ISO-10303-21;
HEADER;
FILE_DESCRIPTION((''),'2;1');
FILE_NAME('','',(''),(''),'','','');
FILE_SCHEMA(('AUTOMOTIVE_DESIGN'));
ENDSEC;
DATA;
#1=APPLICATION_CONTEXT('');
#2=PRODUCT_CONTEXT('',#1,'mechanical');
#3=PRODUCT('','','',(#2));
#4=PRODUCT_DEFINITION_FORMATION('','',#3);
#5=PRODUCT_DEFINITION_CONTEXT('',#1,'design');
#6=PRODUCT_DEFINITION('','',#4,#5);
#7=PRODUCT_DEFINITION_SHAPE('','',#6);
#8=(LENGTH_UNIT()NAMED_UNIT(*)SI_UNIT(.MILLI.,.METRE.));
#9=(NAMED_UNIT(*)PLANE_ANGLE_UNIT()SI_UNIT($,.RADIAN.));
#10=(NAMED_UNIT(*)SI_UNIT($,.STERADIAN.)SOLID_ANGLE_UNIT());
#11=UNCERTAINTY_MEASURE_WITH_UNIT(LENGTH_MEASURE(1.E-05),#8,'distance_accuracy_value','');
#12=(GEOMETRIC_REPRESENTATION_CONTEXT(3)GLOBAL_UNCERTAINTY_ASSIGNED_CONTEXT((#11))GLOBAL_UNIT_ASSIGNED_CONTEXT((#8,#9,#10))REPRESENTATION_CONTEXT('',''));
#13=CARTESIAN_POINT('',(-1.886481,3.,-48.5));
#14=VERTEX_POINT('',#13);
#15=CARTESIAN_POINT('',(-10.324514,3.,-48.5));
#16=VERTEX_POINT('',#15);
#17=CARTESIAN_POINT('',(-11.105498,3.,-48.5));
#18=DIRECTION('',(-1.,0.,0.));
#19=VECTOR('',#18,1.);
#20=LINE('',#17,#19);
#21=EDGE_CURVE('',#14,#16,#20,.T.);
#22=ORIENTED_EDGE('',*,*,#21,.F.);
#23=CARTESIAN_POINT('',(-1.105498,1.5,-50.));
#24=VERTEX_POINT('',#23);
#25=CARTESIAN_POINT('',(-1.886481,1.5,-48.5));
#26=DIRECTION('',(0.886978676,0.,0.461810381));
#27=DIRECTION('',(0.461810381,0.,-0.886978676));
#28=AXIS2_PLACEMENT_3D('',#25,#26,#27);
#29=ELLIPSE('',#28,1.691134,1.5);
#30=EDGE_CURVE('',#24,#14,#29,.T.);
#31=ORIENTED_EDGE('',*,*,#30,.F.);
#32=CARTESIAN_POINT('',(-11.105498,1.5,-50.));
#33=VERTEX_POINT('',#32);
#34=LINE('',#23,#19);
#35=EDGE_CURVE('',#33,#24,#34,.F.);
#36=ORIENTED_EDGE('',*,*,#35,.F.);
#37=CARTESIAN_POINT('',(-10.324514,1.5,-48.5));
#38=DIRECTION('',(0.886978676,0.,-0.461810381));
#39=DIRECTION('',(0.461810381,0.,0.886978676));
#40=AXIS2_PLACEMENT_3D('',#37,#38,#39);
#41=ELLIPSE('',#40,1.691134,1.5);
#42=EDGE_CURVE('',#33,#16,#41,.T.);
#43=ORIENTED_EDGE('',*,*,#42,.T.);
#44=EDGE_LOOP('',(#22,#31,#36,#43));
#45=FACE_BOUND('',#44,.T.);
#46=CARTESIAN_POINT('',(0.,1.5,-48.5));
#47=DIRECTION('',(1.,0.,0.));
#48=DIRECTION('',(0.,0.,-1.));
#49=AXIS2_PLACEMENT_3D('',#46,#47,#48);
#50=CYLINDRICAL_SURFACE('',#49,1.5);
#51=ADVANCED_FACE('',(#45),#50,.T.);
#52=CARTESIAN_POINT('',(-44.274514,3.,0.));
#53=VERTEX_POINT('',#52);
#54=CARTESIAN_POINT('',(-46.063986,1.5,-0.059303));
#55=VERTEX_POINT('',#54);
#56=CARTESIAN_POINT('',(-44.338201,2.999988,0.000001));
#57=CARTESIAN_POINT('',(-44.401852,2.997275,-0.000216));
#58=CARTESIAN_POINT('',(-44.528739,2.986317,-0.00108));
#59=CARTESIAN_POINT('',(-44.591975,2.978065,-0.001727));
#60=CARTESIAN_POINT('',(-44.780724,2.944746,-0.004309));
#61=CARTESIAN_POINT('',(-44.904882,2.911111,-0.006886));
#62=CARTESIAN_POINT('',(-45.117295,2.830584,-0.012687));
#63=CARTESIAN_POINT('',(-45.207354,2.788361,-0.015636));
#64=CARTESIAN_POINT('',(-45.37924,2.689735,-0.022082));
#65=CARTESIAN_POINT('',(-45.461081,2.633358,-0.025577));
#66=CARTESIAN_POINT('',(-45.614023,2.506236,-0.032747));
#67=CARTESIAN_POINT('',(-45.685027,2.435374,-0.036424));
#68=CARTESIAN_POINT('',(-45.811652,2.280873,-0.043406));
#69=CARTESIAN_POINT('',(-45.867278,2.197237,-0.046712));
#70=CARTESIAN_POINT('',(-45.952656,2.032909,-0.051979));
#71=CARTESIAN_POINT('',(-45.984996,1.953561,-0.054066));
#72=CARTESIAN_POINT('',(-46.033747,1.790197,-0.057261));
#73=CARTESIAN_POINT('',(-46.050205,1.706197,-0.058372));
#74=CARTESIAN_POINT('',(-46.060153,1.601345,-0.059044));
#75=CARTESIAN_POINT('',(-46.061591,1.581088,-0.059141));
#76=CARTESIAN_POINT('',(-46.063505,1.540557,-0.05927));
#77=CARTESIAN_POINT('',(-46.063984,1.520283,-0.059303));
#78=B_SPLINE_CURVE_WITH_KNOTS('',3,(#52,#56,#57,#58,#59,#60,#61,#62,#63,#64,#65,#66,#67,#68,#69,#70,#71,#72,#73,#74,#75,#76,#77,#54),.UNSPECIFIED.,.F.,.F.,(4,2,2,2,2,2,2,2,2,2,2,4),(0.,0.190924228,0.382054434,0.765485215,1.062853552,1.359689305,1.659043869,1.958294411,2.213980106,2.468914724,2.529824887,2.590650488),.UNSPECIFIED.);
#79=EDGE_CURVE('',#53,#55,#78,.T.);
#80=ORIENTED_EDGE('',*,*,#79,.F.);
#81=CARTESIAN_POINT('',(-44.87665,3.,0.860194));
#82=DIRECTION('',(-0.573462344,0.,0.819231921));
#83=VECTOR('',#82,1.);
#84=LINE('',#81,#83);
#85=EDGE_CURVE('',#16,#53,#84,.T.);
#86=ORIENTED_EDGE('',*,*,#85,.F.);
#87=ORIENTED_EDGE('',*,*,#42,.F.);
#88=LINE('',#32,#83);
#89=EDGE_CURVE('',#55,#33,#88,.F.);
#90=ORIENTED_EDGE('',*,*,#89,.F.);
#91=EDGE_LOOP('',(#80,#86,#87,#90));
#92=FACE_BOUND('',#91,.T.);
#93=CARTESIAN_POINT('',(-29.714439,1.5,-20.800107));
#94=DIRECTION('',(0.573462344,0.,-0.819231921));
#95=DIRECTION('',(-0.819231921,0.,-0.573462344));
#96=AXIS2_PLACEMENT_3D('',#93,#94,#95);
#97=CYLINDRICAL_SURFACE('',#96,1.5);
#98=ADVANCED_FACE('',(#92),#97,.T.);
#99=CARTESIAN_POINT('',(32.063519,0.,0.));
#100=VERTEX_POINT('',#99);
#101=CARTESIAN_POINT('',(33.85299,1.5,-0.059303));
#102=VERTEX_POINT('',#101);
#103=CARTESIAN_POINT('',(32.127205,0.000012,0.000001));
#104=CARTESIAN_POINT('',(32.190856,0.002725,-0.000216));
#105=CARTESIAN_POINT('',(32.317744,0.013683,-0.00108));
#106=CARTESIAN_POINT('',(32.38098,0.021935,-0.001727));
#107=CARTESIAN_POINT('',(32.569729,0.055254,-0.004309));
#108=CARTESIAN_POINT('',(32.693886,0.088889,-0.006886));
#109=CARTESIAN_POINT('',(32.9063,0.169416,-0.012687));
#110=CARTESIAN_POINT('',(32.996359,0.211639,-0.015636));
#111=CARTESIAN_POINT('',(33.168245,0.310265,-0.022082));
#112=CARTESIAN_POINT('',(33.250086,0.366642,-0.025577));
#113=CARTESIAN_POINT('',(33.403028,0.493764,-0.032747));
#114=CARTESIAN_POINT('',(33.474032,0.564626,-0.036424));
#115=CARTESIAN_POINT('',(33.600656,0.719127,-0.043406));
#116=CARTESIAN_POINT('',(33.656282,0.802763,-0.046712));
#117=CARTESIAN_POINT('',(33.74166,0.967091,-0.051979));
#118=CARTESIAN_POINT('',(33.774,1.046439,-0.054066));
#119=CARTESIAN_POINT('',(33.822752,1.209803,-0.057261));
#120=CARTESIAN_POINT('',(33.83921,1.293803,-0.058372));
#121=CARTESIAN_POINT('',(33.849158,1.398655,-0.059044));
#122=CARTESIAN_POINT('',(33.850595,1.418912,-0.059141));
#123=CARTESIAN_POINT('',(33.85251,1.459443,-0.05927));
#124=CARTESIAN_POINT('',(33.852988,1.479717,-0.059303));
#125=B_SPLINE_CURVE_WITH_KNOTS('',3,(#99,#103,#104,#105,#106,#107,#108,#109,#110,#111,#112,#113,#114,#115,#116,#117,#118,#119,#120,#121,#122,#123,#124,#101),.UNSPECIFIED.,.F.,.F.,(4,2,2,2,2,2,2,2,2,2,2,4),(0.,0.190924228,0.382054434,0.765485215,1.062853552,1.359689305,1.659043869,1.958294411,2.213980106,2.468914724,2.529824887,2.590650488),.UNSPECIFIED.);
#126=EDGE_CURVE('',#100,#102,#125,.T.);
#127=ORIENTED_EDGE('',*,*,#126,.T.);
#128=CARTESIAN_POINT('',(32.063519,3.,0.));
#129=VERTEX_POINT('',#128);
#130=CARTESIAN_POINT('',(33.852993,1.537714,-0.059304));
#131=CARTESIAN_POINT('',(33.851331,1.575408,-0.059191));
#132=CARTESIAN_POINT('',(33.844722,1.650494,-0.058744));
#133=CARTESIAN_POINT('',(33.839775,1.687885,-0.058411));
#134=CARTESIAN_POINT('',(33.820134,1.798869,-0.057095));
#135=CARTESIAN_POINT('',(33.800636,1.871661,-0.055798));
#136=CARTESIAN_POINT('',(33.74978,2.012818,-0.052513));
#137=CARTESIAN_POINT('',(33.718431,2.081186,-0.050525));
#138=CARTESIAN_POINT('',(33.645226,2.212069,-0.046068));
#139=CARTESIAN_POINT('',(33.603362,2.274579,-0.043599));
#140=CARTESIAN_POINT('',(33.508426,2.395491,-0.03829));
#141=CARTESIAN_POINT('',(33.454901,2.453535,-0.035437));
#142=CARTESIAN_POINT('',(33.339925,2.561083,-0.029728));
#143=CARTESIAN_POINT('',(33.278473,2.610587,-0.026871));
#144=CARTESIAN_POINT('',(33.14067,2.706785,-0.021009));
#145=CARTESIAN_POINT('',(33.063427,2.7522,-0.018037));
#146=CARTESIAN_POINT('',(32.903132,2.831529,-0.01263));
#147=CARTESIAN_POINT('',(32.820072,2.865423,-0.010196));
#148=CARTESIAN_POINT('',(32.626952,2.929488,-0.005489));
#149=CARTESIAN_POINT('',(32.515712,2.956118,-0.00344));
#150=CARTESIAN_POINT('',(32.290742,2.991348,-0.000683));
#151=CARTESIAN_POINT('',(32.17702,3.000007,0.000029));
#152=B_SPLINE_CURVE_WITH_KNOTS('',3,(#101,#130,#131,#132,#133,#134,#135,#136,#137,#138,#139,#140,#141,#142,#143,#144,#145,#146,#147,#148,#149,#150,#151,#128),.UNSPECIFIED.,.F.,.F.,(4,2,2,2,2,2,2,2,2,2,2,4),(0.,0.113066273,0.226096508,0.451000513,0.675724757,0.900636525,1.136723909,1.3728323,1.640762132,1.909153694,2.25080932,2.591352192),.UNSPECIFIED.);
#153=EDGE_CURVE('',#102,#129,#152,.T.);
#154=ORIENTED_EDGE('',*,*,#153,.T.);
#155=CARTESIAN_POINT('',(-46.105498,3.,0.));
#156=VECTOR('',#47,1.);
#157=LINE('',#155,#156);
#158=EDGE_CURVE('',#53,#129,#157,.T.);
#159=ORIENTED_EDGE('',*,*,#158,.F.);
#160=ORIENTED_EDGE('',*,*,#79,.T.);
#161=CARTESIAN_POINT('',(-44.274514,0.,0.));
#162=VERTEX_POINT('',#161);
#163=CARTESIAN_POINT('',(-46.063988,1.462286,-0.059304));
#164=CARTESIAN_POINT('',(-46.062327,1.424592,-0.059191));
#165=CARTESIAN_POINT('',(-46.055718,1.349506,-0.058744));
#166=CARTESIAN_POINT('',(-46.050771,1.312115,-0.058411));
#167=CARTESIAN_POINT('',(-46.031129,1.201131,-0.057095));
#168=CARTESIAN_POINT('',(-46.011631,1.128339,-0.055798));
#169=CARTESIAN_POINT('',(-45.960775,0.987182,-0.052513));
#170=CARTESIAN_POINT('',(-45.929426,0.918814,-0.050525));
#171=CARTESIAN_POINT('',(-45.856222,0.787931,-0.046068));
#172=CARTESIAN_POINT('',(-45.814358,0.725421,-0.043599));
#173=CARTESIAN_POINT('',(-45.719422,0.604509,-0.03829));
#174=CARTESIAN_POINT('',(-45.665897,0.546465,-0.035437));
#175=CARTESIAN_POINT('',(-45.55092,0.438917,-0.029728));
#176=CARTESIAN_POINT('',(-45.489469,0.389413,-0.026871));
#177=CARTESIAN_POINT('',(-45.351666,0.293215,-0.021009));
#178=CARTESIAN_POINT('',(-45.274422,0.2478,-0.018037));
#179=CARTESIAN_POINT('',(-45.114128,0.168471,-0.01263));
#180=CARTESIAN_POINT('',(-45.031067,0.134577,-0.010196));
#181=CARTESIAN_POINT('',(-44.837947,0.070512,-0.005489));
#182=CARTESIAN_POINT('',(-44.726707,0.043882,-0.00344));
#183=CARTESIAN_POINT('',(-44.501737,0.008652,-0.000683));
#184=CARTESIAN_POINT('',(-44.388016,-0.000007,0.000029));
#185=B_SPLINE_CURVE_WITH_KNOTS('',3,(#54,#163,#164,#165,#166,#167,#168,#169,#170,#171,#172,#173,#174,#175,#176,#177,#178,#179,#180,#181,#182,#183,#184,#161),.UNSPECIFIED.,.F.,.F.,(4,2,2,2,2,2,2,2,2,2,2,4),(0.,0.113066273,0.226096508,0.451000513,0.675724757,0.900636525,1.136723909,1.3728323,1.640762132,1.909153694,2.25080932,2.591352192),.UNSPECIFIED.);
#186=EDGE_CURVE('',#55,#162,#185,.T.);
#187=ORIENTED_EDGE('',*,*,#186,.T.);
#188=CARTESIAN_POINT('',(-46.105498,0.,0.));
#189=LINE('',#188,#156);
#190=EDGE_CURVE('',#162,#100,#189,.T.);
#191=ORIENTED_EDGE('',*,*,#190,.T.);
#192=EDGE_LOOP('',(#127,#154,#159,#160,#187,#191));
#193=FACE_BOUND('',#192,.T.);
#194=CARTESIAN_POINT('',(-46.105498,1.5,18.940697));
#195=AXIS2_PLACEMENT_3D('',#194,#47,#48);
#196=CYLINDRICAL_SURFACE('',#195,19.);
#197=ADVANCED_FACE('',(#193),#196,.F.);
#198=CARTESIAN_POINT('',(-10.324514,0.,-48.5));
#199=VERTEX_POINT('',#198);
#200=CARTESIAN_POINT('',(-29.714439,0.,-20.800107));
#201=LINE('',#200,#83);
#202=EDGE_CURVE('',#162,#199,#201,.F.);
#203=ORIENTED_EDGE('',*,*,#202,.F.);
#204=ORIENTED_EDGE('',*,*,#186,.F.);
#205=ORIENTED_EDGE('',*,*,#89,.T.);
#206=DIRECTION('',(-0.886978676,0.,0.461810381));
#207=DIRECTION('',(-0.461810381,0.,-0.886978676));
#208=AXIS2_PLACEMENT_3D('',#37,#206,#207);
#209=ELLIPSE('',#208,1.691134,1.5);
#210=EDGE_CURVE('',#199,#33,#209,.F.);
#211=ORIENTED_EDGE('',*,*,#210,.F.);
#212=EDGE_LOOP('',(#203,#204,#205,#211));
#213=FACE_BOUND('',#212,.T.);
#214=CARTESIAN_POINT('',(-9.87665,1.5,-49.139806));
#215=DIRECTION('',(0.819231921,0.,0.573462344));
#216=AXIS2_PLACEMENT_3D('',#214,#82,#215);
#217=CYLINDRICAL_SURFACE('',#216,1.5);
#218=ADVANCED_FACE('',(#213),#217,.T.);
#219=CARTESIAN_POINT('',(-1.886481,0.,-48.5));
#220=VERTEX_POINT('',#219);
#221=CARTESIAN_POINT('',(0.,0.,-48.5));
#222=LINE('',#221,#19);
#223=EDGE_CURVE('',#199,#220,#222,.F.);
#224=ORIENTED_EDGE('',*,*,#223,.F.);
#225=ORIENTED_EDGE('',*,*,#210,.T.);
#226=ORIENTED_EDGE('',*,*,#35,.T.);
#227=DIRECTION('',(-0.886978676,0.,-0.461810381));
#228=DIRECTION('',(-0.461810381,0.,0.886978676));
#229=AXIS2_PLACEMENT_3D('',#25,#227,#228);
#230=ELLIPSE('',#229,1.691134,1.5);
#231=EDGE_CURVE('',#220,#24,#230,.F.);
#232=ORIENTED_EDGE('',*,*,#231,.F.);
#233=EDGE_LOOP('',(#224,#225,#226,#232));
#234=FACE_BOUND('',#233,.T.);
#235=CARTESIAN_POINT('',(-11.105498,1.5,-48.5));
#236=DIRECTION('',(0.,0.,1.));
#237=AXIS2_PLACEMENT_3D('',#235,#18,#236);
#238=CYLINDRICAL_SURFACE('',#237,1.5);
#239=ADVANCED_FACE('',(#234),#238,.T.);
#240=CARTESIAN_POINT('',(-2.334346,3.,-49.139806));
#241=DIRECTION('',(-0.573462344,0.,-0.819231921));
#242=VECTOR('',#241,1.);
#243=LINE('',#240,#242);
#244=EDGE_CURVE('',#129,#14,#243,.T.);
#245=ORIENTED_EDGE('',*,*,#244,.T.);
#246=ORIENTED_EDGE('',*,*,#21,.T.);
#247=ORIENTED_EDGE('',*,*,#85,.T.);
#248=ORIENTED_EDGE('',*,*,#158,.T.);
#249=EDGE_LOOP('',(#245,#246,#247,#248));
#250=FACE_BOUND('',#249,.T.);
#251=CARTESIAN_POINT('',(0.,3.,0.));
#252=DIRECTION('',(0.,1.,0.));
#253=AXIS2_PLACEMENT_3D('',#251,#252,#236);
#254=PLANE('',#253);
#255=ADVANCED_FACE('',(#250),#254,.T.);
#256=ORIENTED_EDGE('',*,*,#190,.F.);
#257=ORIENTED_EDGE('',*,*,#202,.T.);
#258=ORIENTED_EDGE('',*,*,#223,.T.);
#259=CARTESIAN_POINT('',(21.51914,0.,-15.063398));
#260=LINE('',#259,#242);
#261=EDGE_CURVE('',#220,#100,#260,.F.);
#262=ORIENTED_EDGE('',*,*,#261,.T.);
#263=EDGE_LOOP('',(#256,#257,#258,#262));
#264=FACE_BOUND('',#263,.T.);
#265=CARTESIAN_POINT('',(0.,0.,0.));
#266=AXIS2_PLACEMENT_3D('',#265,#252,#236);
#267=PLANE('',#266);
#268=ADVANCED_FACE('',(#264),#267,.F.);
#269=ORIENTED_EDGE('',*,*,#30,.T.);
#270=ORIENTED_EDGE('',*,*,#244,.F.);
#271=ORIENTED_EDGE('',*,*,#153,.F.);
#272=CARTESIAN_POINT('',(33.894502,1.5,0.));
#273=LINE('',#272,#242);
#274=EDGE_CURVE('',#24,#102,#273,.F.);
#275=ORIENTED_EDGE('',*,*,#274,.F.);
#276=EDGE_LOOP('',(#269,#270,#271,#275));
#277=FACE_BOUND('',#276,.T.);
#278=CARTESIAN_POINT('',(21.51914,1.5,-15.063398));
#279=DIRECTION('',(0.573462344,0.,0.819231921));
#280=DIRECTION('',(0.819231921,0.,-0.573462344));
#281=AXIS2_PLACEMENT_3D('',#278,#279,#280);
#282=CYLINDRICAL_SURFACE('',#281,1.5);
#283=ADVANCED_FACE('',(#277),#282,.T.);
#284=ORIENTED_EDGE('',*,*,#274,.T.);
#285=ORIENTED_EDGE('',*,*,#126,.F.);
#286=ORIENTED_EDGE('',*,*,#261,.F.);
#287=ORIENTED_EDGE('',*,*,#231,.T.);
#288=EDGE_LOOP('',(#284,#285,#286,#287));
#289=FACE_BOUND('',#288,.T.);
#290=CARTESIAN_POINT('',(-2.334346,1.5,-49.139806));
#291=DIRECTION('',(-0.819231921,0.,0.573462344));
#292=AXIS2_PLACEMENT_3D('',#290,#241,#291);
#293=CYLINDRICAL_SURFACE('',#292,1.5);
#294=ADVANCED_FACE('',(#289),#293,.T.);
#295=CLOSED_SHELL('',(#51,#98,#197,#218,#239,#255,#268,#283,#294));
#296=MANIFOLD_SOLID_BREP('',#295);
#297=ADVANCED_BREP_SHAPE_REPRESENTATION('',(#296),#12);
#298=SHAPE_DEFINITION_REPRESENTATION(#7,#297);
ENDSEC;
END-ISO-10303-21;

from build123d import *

# Parameters (mm, degrees)
EXTRUDE_1_DEPTH          = 3
FILLET_1_R               = 1.5
CUT_EXTRUDE_1_DEPTH      = 69.078755293
CUT_EXTRUDE_1_DEPTH_BACK = 69.078755293
SKETCH_2_R               = 19


with BuildPart() as part:
    # Эскиз1 → Бобышка-Вытянуть1 (new body)
    with BuildSketch(Plane(origin=(0, 0, 0), x_dir=(1, 0, 0), z_dir=(0, 1, 0))):
        Polygon((-46.105497744, 0), (33.894502256, 0), (-1.105497744, 50), (-11.105497744, 50), align=None)
    extrude(amount=EXTRUDE_1_DEPTH)

    # Скругление1
    fillet_1_edges = [part.edges().sort_by_distance(p)[0] for p in [
        (16.394502256, 0, -25),
        (16.394502256, 3, -25),
        (-28.605497744, 0, -25),
        (-28.605497744, 3, -25),
        (-6.105497744, 0, -50),
        (-6.105497744, 3, -50),
    ]]
    fillet(fillet_1_edges, radius=FILLET_1_R - 0.0001)  # a hair under: the kernel refuses the full size

    # Эскиз2 → Вырез-Вытянуть1 (cut, two sides: drawn at the far end of the back side and taken through both)
    with BuildSketch(Plane(origin=(0, 0, 0), x_dir=(0, 0, -1), z_dir=(1, 0, 0)).offset(-CUT_EXTRUDE_1_DEPTH_BACK)):
        with Locations((-18.940696925, 1.5)):
            Circle(SKETCH_2_R)
    extrude(amount=CUT_EXTRUDE_1_DEPTH + CUT_EXTRUDE_1_DEPTH_BACK, mode=Mode.SUBTRACT)


solid = part.part
